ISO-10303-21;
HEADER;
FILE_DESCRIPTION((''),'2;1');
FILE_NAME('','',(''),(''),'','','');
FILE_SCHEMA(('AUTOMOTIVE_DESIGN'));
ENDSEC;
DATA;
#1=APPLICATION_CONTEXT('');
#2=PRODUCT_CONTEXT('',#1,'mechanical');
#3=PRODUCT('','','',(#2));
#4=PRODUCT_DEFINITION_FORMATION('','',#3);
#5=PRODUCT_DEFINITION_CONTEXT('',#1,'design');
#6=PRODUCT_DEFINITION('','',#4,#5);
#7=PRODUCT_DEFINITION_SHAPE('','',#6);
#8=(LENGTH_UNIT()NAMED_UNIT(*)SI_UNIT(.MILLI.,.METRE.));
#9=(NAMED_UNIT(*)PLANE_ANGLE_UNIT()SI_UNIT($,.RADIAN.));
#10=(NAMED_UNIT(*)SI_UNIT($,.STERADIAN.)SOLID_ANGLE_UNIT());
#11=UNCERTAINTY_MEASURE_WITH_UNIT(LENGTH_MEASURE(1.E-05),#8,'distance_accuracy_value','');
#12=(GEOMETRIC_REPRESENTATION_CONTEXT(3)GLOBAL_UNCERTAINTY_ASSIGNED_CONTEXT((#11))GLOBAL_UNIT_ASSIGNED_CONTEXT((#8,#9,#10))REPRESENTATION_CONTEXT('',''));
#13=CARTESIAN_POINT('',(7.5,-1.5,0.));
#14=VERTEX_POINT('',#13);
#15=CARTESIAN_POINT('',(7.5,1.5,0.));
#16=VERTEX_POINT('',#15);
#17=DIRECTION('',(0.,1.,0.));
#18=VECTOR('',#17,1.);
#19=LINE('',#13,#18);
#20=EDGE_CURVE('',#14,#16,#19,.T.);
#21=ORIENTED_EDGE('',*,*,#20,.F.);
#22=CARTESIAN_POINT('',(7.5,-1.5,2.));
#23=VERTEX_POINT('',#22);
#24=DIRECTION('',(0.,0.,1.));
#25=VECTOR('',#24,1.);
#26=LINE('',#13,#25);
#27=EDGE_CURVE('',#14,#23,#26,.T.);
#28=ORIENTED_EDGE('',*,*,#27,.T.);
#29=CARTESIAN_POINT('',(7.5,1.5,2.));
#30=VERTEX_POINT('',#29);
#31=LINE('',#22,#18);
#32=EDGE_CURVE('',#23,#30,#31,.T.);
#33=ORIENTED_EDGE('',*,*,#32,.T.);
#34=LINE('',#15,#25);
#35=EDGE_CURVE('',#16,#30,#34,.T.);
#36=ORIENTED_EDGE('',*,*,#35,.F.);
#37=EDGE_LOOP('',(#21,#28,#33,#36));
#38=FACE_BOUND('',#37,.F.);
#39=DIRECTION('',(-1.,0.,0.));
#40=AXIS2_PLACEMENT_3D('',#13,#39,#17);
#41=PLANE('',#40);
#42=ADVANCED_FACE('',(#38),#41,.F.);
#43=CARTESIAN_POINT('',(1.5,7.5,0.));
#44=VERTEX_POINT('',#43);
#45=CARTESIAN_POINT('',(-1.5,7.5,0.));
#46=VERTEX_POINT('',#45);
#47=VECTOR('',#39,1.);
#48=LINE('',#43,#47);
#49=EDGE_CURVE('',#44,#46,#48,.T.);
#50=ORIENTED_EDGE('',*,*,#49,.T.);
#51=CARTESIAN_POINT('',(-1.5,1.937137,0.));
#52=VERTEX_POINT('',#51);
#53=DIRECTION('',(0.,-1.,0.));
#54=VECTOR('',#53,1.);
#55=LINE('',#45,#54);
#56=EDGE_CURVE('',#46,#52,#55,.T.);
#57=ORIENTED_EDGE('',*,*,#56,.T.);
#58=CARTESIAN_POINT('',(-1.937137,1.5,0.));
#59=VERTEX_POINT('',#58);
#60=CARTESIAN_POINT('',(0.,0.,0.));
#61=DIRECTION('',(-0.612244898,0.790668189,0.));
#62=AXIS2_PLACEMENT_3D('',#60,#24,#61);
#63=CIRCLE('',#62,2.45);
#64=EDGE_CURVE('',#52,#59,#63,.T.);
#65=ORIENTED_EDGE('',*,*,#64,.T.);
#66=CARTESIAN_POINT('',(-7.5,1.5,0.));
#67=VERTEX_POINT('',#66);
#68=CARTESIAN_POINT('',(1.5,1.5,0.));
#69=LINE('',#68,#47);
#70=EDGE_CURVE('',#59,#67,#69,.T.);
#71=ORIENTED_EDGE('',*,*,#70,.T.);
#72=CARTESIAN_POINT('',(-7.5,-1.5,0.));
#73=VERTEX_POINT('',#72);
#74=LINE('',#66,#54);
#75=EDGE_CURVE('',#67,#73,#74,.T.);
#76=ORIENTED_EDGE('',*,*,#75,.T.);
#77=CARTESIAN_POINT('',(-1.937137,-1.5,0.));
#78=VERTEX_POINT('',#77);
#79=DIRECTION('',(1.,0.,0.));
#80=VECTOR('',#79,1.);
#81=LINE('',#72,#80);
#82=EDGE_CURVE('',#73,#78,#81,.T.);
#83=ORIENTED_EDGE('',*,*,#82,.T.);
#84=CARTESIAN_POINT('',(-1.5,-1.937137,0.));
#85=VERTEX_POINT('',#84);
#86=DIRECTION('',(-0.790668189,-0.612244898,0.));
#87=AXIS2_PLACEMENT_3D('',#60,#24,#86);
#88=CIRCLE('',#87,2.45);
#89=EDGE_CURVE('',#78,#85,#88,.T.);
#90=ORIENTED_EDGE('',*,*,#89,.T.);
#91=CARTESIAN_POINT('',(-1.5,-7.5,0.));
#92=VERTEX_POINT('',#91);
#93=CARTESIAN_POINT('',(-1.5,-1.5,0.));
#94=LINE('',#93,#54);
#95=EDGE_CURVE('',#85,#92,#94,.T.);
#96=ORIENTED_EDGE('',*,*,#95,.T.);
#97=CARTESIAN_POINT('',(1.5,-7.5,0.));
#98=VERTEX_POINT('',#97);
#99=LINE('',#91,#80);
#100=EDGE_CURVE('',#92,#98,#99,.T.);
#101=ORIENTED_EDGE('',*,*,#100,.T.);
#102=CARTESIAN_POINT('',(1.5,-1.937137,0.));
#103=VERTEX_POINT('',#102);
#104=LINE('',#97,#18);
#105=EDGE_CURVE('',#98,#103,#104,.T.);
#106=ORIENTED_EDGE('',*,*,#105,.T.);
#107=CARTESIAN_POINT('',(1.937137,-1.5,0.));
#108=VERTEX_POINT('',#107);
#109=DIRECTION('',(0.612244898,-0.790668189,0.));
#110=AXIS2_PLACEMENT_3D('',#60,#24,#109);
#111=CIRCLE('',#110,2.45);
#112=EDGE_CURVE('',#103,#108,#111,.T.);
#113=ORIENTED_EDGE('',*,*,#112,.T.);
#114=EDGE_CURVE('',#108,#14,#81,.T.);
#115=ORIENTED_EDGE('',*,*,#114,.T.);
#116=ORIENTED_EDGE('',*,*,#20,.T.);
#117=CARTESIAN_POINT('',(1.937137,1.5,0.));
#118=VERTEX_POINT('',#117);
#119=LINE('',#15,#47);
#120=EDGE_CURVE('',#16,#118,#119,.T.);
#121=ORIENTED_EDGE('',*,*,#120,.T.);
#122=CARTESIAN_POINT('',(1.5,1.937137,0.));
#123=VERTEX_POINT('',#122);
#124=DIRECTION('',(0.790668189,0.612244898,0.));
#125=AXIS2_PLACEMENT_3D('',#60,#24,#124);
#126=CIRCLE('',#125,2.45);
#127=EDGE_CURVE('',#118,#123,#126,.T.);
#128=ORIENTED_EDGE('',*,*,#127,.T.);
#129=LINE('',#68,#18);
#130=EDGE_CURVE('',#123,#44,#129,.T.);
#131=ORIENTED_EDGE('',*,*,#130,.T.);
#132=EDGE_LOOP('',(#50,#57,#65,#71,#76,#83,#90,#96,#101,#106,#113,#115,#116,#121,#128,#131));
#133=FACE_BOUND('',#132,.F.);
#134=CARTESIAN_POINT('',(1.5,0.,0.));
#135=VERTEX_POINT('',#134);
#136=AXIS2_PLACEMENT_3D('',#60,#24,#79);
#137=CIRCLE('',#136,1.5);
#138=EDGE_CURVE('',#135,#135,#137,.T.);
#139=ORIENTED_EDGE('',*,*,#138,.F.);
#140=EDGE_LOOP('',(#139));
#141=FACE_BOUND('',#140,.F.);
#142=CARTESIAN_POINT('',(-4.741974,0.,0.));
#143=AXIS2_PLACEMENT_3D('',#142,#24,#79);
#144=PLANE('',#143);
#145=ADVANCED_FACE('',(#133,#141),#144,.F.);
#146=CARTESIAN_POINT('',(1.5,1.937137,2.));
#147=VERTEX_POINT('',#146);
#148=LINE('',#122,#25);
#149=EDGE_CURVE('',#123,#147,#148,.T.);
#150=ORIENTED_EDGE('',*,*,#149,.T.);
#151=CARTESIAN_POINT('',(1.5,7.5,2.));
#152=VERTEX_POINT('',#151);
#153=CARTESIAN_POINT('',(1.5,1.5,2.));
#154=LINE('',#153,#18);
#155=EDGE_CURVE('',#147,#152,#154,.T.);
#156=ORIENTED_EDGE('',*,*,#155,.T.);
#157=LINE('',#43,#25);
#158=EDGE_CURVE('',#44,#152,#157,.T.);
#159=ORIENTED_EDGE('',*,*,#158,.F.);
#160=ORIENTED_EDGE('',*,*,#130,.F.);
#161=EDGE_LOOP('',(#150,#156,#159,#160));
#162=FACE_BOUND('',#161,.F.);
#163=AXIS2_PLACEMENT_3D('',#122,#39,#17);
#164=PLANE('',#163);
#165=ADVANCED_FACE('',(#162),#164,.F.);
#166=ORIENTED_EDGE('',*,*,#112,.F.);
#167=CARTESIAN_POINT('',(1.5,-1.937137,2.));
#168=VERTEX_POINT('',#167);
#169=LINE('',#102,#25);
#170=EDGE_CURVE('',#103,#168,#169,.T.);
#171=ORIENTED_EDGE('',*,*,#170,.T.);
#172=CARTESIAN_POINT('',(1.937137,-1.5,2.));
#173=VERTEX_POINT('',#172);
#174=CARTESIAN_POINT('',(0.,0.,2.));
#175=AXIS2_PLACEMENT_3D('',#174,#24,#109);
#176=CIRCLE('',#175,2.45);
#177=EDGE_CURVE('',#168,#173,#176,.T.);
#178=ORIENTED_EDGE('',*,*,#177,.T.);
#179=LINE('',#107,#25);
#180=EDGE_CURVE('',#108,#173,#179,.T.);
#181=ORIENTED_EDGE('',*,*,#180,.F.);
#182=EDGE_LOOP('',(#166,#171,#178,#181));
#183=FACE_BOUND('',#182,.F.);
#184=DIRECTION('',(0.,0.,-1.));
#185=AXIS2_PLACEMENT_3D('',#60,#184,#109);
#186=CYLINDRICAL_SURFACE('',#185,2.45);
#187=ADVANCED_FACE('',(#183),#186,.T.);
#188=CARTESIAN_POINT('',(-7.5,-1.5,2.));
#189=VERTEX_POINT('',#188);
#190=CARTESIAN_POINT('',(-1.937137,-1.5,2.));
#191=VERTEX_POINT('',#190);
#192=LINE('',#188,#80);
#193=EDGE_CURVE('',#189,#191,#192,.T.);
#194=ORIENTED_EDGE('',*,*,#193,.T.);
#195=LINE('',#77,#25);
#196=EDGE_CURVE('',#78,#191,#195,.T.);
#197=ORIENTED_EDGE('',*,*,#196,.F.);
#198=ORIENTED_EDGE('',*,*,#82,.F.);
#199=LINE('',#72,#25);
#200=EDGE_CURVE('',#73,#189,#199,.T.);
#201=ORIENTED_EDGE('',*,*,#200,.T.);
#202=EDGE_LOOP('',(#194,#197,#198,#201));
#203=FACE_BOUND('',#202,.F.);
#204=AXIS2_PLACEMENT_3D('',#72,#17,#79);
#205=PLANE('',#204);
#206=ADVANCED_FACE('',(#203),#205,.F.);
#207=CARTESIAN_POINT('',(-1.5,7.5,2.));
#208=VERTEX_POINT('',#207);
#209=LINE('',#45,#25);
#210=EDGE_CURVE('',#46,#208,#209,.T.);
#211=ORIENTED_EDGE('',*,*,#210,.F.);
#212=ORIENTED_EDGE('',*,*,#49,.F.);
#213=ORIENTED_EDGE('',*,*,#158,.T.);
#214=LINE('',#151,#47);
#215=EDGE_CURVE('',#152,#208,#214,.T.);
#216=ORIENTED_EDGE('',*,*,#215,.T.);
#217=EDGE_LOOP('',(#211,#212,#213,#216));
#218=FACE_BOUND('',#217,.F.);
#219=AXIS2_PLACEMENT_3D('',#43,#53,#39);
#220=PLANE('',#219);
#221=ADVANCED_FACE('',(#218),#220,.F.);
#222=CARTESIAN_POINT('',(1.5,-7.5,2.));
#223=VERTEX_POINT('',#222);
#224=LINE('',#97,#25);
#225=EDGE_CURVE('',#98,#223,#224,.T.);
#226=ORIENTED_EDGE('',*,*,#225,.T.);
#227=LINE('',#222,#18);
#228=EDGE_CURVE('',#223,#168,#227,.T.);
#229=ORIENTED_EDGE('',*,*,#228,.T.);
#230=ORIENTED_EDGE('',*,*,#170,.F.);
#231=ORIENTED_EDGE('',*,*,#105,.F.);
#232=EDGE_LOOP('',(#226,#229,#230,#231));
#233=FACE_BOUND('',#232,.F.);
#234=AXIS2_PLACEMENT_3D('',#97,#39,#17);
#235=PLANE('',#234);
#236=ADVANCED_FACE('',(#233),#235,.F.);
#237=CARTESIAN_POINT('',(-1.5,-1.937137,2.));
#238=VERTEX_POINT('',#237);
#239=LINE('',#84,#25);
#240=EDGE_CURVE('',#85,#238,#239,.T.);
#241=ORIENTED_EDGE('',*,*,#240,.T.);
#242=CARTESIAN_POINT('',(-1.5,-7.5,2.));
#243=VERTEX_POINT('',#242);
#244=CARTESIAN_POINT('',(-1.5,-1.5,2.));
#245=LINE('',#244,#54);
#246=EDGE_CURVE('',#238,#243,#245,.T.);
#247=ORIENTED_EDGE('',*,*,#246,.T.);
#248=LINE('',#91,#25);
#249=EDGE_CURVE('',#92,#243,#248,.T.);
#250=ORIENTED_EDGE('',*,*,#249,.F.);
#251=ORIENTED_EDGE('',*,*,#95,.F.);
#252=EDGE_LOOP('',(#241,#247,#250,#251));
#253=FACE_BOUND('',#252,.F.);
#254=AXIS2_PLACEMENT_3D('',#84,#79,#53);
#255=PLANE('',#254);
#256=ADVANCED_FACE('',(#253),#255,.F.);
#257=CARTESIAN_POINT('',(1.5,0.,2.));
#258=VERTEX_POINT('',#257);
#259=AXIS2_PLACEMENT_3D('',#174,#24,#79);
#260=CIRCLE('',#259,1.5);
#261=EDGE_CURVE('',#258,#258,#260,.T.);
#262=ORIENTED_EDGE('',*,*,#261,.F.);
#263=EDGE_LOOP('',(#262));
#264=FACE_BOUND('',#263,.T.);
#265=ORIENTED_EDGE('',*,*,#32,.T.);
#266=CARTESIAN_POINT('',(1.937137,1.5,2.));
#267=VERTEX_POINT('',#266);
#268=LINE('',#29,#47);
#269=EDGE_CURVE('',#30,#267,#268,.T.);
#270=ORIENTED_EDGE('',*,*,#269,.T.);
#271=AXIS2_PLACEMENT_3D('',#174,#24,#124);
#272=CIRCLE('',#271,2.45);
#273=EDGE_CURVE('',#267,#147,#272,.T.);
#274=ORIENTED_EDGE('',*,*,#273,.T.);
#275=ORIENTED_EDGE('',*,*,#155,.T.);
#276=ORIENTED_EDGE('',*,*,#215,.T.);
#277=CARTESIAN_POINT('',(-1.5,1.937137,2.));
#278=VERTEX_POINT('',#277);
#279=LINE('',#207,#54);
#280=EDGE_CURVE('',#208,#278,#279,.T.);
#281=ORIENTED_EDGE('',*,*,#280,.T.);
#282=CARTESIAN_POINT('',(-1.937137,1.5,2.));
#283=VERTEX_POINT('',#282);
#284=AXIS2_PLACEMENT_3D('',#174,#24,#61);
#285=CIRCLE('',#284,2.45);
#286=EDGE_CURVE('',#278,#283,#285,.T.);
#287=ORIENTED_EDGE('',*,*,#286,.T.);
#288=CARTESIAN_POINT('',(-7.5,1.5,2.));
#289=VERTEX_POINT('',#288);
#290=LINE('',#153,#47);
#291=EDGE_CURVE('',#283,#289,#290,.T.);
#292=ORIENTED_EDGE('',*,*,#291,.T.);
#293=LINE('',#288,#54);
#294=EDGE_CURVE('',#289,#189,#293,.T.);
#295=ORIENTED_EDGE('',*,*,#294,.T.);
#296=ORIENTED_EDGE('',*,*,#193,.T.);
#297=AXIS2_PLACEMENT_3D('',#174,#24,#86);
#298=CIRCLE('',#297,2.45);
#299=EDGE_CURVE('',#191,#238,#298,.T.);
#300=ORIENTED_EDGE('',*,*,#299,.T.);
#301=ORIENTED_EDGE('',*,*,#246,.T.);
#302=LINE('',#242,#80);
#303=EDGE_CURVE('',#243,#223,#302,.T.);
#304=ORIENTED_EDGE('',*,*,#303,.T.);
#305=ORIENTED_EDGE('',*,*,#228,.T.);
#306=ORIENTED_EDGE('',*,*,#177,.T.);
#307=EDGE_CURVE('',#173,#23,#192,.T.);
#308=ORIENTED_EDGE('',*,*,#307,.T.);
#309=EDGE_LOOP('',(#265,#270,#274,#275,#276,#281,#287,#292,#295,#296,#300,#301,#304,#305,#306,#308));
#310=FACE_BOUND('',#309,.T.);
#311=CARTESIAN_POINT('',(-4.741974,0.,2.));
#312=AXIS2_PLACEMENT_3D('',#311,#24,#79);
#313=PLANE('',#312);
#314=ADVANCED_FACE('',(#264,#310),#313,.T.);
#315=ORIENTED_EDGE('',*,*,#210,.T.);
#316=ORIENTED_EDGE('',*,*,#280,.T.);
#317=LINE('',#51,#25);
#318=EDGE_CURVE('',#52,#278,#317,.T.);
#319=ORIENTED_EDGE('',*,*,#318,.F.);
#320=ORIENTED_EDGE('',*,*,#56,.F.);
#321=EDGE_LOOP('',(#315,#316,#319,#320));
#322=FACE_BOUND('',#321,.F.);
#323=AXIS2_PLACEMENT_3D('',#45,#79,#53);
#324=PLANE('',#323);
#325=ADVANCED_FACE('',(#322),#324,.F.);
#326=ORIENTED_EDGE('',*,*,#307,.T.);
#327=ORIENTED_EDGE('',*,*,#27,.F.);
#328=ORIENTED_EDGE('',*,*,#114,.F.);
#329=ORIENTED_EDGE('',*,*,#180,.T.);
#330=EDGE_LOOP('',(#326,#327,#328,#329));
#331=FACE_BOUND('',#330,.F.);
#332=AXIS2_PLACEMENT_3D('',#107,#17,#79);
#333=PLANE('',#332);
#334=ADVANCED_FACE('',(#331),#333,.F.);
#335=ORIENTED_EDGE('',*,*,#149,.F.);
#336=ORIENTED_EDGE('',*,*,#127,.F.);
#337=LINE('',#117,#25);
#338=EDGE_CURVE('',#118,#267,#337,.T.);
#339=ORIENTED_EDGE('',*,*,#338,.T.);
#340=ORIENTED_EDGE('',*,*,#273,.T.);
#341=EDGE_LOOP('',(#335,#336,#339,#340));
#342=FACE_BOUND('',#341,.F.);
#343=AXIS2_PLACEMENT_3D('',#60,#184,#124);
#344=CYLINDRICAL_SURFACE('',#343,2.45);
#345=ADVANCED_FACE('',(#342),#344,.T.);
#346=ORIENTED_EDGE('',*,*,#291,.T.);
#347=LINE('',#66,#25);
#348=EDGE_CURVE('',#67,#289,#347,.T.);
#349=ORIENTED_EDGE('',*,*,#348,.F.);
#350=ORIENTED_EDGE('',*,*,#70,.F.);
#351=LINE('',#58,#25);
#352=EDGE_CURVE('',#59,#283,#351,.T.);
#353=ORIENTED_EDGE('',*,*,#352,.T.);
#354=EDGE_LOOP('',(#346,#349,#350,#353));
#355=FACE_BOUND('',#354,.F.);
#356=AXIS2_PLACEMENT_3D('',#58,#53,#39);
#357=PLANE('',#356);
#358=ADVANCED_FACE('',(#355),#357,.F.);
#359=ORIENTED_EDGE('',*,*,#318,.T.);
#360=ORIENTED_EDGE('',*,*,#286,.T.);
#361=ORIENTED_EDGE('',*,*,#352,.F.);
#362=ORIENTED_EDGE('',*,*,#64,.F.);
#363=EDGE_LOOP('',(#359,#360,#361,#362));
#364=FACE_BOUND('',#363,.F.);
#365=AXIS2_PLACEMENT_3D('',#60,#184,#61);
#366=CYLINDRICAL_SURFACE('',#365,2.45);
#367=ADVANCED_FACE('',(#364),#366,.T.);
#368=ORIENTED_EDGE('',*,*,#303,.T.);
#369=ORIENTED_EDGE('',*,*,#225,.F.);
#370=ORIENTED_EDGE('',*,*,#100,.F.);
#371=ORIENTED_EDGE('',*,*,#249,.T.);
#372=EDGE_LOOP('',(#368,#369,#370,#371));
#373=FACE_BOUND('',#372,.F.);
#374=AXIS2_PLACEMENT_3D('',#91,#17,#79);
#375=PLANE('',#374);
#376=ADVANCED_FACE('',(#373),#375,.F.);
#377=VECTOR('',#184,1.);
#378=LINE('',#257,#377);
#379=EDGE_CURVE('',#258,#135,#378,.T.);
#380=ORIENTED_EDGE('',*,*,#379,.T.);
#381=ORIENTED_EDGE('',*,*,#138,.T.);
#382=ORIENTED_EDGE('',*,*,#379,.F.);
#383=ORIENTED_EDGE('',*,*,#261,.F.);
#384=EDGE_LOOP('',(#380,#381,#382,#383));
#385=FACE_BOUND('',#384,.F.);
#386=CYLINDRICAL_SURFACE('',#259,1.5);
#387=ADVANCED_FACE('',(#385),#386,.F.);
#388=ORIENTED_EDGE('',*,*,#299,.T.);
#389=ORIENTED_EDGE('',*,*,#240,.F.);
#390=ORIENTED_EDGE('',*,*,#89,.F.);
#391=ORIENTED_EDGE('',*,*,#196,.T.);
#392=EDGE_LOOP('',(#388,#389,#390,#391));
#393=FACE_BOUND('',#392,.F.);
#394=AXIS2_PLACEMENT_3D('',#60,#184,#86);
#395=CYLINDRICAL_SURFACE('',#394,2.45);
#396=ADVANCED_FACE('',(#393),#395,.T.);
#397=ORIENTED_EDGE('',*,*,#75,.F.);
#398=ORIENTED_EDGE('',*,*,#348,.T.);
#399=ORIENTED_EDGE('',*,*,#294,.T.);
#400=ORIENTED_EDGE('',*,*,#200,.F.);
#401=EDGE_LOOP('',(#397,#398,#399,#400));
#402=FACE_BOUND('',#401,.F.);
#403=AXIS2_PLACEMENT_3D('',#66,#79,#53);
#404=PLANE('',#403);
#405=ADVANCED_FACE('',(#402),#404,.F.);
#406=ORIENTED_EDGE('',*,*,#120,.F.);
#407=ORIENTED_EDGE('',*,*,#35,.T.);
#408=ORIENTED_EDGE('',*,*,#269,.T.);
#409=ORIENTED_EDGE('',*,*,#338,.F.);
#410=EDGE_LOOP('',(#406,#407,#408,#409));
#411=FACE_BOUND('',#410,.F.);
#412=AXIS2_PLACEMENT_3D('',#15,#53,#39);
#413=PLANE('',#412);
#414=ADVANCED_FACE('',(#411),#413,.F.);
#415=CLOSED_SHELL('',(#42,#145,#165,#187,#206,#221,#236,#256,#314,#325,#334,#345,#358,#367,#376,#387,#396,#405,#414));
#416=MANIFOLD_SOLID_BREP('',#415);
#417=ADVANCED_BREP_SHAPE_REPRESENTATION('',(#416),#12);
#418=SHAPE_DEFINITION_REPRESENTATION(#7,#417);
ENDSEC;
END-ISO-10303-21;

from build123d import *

# Parameters (mm, degrees)
F0_W     = 3
F0_H     = 3
F1_DEPTH = 2
F2_R     = 1.5
F3_DEPTH = 2.001


with BuildPart() as f1:
    # F0 (on Top) → F1 (new body)
    with BuildSketch(Plane.XY):
        with BuildLine():
            ThreePointArc((-1.9371370628, -1.5), (-2.45, 0), (-1.9371370628, 1.5))
            Line((-1.9371370628, 1.5), (-7.5, 1.5))
            Line((-7.5, 1.5), (-7.5, -1.5))
            Line((-7.5, -1.5), (-1.9371370628, -1.5))
        make_face()
        Rectangle(F0_W, F0_H)
        with BuildLine():
            Line((-1.5, -1.5), (-1.5, 1.5))
            Line((-1.5, 1.5), (-1.9371370628, 1.5))
            ThreePointArc((-1.9371370628, 1.5), (-2.45, 0), (-1.9371370628, -1.5))
            Line((-1.9371370628, -1.5), (-1.5, -1.5))
        make_face()
        with BuildLine():
            ThreePointArc((1.9371370628, 1.5), (2.3182413381, 0.7926267079), (2.45, 0))
            ThreePointArc((2.45, 0), (2.3182413381, -0.7926267079), (1.9371370628, -1.5))
            Line((1.9371370628, -1.5), (7.5, -1.5))
            Line((7.5, -1.5), (7.5, 1.5))
            Line((7.5, 1.5), (1.9371370628, 1.5))
        make_face()
        with BuildLine():
            Line((1.5, -7.5), (1.5, -1.9371370628))
            ThreePointArc((1.5, -1.9371370628), (0, -2.45), (-1.5, -1.9371370628))
            Line((-1.5, -1.9371370628), (-1.5, -7.5))
            Line((-1.5, -7.5), (1.5, -7.5))
        make_face()
        with BuildLine():
            Line((1.5, 1.5), (1.5, 1.9371370628))
            ThreePointArc((1.5, 1.9371370628), (0, 2.45), (-1.5, 1.9371370628))
            Line((-1.5, 1.9371370628), (-1.5, 1.5))
            Line((-1.5, 1.5), (1.5, 1.5))
        make_face()
        with BuildLine():
            ThreePointArc((1.9371370628, -1.5), (2.3182413381, -0.7926267079), (2.45, 0))
            ThreePointArc((2.45, 0), (2.3182413381, 0.7926267079), (1.9371370628, 1.5))
            Line((1.9371370628, 1.5), (1.5, 1.5))
            Line((1.5, 1.5), (1.5, -1.5))
            Line((1.5, -1.5), (1.9371370628, -1.5))
        make_face()
        with BuildLine():
            ThreePointArc((-1.5, 1.9371370628), (0, 2.45), (1.5, 1.9371370628))
            Line((1.5, 1.9371370628), (1.5, 7.5))
            Line((1.5, 7.5), (-1.5, 7.5))
            Line((-1.5, 7.5), (-1.5, 1.9371370628))
        make_face()
        with BuildLine():
            ThreePointArc((-1.5, -1.9371370628), (0, -2.45), (1.5, -1.9371370628))
            Line((1.5, -1.9371370628), (1.5, -1.5))
            Line((1.5, -1.5), (-1.5, -1.5))
            Line((-1.5, -1.5), (-1.5, -1.9371370628))
        make_face()
        with BuildLine():
            ThreePointArc((-1.9371370628, -1.5), (-1.7324116139, -1.7324116139), (-1.5, -1.9371370628))
            Line((-1.5, -1.9371370628), (-1.5, -1.5))
            Line((-1.5, -1.5), (-1.9371370628, -1.5))
        make_face()
        with BuildLine():
            Line((1.5, 1.5), (1.9371370628, 1.5))
            ThreePointArc((1.9371370628, 1.5), (1.7324116139, 1.7324116139), (1.5, 1.9371370628))
            Line((1.5, 1.9371370628), (1.5, 1.5))
        make_face()
        with BuildLine():
            ThreePointArc((1.5, -1.9371370628), (1.7324116139, -1.7324116139), (1.9371370628, -1.5))
            Line((1.9371370628, -1.5), (1.5, -1.5))
            Line((1.5, -1.5), (1.5, -1.9371370628))
        make_face()
        with BuildLine():
            Line((-1.5, 1.5), (-1.5, 1.9371370628))
            ThreePointArc((-1.5, 1.9371370628), (-1.7324116139, 1.7324116139), (-1.9371370628, 1.5))
            Line((-1.9371370628, 1.5), (-1.5, 1.5))
        make_face()
    extrude(amount=F1_DEPTH)

    # F2 (on face) → F3 (cut, through all)
    with BuildSketch(Plane.XY.offset(2)):
        Circle(F2_R)
    extrude(amount=-F3_DEPTH, mode=Mode.SUBTRACT)


solid = f1.part
